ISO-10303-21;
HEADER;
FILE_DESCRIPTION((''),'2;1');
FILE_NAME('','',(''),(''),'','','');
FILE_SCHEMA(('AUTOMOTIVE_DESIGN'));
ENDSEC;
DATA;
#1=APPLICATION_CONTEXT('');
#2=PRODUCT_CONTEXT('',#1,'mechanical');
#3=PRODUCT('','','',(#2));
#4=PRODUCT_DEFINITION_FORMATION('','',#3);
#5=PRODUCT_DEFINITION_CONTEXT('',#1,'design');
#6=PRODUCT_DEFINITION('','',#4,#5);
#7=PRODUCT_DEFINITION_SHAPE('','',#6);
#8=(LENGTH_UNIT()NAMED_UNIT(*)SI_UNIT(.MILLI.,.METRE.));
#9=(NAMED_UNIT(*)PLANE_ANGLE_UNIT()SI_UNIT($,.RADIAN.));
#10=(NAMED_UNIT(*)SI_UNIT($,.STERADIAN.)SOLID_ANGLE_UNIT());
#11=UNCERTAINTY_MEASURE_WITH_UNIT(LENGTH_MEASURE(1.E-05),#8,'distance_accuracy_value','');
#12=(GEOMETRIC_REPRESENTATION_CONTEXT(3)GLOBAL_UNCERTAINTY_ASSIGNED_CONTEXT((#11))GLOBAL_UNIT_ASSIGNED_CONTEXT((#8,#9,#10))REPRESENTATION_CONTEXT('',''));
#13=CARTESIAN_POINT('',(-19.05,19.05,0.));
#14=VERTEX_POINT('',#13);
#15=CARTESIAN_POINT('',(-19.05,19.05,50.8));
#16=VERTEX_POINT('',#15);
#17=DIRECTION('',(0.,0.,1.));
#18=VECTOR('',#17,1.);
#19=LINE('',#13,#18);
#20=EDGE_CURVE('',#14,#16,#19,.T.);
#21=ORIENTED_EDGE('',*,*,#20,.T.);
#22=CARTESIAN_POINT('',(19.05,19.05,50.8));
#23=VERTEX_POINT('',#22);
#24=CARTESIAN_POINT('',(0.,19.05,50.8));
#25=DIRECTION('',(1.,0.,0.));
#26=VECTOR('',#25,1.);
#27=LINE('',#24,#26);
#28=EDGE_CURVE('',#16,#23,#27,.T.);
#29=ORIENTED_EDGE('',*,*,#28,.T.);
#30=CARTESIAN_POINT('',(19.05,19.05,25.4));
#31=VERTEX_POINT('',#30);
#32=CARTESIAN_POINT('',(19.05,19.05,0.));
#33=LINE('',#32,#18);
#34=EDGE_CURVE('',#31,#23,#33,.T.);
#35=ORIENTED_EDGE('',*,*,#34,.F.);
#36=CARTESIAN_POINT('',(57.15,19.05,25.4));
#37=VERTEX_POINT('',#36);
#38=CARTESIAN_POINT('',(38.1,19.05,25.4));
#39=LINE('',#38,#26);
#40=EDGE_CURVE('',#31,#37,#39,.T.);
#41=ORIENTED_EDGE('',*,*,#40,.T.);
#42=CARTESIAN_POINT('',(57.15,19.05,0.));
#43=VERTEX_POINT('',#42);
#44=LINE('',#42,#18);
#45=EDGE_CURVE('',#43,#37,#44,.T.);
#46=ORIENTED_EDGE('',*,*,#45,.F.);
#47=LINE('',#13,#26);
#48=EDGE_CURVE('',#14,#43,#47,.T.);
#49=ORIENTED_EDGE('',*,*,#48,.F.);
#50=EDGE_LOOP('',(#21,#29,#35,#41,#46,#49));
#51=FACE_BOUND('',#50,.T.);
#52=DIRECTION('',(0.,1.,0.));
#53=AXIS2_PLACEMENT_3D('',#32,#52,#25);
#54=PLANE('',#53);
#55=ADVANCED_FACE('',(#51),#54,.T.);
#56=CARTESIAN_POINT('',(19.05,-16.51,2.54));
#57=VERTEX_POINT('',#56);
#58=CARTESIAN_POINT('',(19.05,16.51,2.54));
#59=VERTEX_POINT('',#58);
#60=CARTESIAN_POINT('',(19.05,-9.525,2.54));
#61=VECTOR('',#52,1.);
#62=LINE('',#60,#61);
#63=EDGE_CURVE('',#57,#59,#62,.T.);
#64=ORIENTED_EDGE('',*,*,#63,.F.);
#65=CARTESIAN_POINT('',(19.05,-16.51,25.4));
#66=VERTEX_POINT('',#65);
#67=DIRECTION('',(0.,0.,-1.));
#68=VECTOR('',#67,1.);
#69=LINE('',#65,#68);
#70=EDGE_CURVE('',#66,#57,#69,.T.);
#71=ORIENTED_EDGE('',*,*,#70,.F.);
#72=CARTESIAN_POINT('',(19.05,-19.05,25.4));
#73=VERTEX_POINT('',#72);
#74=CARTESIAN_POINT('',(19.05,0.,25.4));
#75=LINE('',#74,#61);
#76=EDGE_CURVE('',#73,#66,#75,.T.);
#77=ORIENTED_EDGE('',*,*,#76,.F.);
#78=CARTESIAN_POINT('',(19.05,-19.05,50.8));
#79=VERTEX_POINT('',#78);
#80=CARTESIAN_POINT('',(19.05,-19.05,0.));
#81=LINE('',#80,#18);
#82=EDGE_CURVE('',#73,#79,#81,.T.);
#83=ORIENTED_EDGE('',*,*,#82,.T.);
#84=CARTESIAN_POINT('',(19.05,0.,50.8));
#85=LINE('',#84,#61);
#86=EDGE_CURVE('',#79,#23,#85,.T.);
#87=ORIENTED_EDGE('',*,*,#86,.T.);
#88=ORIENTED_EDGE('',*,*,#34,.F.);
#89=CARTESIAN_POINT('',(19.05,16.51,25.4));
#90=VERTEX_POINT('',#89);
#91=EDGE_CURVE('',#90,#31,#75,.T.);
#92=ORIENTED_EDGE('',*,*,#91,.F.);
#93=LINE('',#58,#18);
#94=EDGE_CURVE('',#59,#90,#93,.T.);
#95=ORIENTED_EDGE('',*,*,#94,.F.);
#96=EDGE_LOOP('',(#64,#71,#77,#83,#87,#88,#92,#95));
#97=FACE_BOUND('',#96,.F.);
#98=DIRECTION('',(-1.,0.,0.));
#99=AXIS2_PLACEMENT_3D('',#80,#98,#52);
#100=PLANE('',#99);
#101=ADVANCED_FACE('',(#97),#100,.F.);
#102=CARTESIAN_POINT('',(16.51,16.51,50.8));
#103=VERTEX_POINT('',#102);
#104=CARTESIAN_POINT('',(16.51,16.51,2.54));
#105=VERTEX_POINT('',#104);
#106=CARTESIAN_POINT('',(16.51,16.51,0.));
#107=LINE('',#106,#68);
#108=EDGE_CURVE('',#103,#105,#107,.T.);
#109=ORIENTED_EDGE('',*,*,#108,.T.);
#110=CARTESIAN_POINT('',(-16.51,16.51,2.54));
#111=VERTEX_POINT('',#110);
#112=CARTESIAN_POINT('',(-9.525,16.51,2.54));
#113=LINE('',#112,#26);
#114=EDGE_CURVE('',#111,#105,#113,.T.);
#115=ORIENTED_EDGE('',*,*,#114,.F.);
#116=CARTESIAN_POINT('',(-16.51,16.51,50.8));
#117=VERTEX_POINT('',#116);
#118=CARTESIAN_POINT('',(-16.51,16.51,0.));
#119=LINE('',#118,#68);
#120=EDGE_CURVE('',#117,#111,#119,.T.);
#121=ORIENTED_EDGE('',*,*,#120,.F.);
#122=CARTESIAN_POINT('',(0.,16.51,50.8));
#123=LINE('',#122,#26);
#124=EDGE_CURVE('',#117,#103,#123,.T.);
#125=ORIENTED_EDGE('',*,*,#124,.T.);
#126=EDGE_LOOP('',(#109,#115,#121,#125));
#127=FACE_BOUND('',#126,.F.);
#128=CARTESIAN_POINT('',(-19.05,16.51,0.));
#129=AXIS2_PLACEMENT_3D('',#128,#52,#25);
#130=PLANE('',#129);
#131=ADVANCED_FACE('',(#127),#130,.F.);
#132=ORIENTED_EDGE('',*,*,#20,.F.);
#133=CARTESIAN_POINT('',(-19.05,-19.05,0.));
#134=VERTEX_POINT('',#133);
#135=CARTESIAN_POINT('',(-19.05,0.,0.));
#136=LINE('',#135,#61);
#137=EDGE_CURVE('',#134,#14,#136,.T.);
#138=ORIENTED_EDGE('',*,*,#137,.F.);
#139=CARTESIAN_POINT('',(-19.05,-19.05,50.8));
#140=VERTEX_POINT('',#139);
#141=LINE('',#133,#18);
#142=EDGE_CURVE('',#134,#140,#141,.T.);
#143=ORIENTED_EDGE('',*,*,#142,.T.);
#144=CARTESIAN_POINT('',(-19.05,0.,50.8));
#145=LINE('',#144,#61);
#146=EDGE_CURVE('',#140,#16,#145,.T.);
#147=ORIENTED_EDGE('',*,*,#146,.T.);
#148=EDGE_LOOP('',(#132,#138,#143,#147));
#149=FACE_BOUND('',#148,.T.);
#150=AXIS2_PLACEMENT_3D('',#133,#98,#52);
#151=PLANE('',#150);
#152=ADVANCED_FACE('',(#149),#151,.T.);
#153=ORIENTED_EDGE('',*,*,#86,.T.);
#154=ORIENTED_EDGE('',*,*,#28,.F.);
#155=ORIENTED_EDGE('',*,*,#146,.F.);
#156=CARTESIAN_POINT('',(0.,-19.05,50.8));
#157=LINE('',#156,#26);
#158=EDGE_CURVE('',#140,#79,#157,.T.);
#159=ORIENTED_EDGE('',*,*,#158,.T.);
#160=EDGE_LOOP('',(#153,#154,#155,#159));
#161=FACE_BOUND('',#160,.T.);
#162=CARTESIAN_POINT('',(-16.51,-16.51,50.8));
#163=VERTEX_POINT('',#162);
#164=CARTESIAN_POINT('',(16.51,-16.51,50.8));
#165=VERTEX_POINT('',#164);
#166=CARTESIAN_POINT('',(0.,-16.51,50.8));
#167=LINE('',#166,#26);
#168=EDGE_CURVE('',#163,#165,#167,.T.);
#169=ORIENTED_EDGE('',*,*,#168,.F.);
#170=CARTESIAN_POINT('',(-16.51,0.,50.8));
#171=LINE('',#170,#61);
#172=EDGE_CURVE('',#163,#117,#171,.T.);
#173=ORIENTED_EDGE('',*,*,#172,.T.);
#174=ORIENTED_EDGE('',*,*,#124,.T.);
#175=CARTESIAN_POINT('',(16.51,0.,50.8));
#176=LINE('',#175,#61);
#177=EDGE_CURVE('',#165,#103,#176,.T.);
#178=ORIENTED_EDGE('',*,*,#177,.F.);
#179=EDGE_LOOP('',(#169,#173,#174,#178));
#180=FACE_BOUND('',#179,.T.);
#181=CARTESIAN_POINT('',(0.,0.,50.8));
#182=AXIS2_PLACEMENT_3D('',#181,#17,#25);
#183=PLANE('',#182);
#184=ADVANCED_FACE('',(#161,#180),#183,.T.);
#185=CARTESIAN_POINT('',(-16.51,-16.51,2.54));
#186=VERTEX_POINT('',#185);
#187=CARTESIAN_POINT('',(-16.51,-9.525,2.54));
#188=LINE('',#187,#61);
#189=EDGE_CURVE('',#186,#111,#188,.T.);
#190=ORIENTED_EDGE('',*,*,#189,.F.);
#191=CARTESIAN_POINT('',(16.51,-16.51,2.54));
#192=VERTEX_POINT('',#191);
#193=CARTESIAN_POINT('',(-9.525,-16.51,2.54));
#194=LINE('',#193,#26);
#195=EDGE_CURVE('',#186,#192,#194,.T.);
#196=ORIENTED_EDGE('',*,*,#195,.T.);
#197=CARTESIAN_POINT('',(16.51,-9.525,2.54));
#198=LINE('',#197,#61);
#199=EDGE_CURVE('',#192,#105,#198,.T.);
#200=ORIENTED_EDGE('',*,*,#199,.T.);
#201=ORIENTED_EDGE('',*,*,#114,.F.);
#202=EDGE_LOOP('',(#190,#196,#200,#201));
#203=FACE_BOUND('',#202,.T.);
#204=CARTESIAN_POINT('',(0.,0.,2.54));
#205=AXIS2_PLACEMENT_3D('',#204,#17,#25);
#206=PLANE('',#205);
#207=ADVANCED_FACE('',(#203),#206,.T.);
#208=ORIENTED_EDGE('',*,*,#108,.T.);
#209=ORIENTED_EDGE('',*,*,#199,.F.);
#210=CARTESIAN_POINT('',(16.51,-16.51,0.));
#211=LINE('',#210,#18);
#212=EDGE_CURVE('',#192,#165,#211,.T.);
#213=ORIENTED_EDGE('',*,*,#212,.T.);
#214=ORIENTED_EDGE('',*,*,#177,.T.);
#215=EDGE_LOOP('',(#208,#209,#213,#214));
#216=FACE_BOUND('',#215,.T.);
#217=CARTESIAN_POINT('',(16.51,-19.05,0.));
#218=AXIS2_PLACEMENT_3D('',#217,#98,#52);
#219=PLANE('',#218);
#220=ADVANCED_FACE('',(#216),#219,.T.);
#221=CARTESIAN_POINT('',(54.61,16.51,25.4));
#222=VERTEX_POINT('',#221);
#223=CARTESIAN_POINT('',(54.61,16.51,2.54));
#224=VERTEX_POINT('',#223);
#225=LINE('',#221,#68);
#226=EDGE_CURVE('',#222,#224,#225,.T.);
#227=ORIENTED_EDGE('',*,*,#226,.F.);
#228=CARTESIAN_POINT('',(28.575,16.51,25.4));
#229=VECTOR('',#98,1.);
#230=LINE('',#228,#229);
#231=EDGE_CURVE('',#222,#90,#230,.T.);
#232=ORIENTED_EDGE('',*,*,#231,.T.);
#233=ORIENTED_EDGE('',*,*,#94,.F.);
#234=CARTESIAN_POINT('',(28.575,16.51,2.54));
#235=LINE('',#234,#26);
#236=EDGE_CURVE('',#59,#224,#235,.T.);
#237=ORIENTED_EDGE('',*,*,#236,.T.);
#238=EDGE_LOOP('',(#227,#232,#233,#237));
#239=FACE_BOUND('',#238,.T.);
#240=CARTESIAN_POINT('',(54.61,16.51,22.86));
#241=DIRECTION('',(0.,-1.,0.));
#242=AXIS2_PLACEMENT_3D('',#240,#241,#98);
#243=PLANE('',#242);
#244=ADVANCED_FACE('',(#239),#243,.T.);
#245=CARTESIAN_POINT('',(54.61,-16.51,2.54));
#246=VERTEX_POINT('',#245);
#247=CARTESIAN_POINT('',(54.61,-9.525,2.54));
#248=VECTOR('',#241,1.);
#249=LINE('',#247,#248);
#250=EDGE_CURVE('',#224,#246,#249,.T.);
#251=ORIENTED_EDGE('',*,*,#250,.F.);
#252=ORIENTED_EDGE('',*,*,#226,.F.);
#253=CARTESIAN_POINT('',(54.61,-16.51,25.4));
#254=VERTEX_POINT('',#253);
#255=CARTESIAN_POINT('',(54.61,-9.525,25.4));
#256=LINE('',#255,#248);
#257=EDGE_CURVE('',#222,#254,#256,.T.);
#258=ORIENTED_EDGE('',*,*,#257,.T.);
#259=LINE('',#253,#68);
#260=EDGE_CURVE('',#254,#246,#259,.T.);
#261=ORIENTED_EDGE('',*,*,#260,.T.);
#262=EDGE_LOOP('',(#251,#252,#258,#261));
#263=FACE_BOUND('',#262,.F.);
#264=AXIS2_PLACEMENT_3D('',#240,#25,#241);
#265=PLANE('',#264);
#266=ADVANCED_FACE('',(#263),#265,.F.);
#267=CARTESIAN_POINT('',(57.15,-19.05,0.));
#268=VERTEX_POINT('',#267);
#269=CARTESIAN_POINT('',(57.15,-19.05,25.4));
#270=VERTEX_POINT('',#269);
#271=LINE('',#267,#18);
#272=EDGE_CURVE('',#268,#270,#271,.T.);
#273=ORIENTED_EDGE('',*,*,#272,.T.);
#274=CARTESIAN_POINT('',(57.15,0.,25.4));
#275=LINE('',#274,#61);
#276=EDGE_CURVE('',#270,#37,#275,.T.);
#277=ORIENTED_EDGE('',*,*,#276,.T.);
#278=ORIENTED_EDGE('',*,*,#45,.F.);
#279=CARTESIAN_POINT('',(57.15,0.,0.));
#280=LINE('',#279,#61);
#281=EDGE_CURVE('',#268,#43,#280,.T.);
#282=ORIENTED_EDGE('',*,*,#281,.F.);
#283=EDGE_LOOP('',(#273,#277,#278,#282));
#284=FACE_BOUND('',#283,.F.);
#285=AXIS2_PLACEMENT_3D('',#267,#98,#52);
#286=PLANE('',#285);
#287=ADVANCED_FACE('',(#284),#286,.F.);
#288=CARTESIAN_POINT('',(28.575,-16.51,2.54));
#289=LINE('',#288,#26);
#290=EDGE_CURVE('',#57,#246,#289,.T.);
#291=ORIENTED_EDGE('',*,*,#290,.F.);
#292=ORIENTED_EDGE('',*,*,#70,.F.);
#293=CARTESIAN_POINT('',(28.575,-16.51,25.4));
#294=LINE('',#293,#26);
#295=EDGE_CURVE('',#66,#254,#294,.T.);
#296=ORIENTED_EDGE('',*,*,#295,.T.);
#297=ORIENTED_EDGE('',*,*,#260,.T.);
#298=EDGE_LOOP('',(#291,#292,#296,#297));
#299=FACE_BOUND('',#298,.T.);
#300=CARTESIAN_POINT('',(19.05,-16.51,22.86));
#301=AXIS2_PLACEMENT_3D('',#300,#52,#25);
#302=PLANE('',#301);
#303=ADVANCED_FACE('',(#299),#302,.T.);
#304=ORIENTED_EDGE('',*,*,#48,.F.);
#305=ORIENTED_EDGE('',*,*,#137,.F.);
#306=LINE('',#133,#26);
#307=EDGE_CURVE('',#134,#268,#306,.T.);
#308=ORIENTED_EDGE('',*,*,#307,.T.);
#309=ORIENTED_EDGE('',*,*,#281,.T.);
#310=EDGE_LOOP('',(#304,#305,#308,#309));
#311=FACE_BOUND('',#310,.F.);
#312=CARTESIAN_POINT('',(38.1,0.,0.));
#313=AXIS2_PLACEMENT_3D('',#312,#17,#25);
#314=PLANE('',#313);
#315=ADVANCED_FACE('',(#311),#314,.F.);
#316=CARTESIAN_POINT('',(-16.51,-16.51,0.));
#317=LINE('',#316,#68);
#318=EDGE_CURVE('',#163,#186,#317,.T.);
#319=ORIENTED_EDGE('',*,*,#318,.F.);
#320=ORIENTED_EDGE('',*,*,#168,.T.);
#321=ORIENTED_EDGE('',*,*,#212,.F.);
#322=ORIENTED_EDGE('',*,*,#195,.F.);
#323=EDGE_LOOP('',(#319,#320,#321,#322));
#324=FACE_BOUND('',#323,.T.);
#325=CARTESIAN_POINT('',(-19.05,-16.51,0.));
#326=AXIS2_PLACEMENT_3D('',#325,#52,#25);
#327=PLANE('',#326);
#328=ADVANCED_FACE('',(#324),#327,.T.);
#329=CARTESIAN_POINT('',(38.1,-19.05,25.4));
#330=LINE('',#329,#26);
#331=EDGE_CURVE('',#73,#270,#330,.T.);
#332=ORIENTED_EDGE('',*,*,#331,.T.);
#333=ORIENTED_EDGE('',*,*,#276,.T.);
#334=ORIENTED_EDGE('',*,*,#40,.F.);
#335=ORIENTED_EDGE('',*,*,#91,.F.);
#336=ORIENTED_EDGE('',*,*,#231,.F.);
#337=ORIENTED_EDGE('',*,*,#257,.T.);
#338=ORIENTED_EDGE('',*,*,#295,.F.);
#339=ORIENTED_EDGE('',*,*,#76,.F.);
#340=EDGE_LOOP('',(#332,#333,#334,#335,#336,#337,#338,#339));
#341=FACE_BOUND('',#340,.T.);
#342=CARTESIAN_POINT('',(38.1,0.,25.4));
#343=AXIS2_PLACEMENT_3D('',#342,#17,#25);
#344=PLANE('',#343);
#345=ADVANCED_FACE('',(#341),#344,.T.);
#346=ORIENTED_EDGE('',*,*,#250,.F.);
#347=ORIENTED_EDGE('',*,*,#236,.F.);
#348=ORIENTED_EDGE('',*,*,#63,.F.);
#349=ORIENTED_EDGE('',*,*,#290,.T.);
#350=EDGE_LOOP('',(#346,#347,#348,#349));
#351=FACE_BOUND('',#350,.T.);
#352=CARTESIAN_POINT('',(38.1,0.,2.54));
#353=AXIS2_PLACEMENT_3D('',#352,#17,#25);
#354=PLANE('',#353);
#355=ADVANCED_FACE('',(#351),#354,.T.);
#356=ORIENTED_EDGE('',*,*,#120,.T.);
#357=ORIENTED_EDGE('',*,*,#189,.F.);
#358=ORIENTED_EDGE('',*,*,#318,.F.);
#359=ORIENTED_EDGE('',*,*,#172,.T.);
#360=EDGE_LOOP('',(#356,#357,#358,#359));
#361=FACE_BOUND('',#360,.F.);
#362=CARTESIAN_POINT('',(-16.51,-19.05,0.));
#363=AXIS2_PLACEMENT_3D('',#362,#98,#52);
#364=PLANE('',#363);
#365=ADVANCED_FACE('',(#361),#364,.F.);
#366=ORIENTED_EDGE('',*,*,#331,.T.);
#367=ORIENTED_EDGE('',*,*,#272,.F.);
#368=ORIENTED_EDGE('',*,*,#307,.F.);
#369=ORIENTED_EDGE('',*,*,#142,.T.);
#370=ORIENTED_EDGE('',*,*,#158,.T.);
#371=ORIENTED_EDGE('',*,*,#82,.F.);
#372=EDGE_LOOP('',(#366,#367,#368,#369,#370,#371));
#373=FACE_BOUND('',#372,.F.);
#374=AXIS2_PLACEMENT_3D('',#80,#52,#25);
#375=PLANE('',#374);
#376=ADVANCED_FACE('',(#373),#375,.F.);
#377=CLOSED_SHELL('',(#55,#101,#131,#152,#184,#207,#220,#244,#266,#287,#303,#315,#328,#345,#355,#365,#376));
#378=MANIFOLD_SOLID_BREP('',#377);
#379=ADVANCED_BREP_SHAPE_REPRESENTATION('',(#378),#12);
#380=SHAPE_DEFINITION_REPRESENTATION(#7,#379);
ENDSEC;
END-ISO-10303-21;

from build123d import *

# Parameters (mm, degrees)
F0_W     = 38.1
F0_H     = 38.1
F1_DEPTH = 50.8
F2_T     = -2.54
F3_DEPTH = 25.4
F4_T     = -2.54


# Not quite as in the source:
# - a shell that OpenCascade refuses in one call is made with other operations: the cavity is built on its own and cut out


with BuildPart() as f1:
    # F0 (on Top) → F1 (new body)
    with BuildSketch(Plane.XY):
        Rectangle(F0_W, F0_H)
    extrude(amount=F1_DEPTH)

    # F2
    f2_openings = [f1.faces().sort_by_distance(p)[0] for p in [
        (0, 0, 50.8),
    ]]
    offset(amount=F2_T, openings=f2_openings)

    # F0 (on Top) → F3 (join)
    with BuildSketch(Plane.XY):
        with Locations((38.1, 0)):
            Rectangle(F0_W, F0_H)
    extrude(amount=F3_DEPTH)

    # F4: a shell. OpenCascade refuses it in one call, so the cavity is built on its own and cut out:
    # the body offset inwards by the wall thickness, plus a prism from it out through each open face.
    f4_core = offset(f1.part, amount=F4_T, kind=Kind.INTERSECTION, mode=Mode.PRIVATE)
    f4_exits = [f4_core.faces().sort_by_distance(p)[0] for p in [
        (36.83, 0, 22.86),
    ]]
    add(f4_core, mode=Mode.SUBTRACT)
    extrude(f4_exits, amount=-F4_T, mode=Mode.SUBTRACT)


solid = f1.part
